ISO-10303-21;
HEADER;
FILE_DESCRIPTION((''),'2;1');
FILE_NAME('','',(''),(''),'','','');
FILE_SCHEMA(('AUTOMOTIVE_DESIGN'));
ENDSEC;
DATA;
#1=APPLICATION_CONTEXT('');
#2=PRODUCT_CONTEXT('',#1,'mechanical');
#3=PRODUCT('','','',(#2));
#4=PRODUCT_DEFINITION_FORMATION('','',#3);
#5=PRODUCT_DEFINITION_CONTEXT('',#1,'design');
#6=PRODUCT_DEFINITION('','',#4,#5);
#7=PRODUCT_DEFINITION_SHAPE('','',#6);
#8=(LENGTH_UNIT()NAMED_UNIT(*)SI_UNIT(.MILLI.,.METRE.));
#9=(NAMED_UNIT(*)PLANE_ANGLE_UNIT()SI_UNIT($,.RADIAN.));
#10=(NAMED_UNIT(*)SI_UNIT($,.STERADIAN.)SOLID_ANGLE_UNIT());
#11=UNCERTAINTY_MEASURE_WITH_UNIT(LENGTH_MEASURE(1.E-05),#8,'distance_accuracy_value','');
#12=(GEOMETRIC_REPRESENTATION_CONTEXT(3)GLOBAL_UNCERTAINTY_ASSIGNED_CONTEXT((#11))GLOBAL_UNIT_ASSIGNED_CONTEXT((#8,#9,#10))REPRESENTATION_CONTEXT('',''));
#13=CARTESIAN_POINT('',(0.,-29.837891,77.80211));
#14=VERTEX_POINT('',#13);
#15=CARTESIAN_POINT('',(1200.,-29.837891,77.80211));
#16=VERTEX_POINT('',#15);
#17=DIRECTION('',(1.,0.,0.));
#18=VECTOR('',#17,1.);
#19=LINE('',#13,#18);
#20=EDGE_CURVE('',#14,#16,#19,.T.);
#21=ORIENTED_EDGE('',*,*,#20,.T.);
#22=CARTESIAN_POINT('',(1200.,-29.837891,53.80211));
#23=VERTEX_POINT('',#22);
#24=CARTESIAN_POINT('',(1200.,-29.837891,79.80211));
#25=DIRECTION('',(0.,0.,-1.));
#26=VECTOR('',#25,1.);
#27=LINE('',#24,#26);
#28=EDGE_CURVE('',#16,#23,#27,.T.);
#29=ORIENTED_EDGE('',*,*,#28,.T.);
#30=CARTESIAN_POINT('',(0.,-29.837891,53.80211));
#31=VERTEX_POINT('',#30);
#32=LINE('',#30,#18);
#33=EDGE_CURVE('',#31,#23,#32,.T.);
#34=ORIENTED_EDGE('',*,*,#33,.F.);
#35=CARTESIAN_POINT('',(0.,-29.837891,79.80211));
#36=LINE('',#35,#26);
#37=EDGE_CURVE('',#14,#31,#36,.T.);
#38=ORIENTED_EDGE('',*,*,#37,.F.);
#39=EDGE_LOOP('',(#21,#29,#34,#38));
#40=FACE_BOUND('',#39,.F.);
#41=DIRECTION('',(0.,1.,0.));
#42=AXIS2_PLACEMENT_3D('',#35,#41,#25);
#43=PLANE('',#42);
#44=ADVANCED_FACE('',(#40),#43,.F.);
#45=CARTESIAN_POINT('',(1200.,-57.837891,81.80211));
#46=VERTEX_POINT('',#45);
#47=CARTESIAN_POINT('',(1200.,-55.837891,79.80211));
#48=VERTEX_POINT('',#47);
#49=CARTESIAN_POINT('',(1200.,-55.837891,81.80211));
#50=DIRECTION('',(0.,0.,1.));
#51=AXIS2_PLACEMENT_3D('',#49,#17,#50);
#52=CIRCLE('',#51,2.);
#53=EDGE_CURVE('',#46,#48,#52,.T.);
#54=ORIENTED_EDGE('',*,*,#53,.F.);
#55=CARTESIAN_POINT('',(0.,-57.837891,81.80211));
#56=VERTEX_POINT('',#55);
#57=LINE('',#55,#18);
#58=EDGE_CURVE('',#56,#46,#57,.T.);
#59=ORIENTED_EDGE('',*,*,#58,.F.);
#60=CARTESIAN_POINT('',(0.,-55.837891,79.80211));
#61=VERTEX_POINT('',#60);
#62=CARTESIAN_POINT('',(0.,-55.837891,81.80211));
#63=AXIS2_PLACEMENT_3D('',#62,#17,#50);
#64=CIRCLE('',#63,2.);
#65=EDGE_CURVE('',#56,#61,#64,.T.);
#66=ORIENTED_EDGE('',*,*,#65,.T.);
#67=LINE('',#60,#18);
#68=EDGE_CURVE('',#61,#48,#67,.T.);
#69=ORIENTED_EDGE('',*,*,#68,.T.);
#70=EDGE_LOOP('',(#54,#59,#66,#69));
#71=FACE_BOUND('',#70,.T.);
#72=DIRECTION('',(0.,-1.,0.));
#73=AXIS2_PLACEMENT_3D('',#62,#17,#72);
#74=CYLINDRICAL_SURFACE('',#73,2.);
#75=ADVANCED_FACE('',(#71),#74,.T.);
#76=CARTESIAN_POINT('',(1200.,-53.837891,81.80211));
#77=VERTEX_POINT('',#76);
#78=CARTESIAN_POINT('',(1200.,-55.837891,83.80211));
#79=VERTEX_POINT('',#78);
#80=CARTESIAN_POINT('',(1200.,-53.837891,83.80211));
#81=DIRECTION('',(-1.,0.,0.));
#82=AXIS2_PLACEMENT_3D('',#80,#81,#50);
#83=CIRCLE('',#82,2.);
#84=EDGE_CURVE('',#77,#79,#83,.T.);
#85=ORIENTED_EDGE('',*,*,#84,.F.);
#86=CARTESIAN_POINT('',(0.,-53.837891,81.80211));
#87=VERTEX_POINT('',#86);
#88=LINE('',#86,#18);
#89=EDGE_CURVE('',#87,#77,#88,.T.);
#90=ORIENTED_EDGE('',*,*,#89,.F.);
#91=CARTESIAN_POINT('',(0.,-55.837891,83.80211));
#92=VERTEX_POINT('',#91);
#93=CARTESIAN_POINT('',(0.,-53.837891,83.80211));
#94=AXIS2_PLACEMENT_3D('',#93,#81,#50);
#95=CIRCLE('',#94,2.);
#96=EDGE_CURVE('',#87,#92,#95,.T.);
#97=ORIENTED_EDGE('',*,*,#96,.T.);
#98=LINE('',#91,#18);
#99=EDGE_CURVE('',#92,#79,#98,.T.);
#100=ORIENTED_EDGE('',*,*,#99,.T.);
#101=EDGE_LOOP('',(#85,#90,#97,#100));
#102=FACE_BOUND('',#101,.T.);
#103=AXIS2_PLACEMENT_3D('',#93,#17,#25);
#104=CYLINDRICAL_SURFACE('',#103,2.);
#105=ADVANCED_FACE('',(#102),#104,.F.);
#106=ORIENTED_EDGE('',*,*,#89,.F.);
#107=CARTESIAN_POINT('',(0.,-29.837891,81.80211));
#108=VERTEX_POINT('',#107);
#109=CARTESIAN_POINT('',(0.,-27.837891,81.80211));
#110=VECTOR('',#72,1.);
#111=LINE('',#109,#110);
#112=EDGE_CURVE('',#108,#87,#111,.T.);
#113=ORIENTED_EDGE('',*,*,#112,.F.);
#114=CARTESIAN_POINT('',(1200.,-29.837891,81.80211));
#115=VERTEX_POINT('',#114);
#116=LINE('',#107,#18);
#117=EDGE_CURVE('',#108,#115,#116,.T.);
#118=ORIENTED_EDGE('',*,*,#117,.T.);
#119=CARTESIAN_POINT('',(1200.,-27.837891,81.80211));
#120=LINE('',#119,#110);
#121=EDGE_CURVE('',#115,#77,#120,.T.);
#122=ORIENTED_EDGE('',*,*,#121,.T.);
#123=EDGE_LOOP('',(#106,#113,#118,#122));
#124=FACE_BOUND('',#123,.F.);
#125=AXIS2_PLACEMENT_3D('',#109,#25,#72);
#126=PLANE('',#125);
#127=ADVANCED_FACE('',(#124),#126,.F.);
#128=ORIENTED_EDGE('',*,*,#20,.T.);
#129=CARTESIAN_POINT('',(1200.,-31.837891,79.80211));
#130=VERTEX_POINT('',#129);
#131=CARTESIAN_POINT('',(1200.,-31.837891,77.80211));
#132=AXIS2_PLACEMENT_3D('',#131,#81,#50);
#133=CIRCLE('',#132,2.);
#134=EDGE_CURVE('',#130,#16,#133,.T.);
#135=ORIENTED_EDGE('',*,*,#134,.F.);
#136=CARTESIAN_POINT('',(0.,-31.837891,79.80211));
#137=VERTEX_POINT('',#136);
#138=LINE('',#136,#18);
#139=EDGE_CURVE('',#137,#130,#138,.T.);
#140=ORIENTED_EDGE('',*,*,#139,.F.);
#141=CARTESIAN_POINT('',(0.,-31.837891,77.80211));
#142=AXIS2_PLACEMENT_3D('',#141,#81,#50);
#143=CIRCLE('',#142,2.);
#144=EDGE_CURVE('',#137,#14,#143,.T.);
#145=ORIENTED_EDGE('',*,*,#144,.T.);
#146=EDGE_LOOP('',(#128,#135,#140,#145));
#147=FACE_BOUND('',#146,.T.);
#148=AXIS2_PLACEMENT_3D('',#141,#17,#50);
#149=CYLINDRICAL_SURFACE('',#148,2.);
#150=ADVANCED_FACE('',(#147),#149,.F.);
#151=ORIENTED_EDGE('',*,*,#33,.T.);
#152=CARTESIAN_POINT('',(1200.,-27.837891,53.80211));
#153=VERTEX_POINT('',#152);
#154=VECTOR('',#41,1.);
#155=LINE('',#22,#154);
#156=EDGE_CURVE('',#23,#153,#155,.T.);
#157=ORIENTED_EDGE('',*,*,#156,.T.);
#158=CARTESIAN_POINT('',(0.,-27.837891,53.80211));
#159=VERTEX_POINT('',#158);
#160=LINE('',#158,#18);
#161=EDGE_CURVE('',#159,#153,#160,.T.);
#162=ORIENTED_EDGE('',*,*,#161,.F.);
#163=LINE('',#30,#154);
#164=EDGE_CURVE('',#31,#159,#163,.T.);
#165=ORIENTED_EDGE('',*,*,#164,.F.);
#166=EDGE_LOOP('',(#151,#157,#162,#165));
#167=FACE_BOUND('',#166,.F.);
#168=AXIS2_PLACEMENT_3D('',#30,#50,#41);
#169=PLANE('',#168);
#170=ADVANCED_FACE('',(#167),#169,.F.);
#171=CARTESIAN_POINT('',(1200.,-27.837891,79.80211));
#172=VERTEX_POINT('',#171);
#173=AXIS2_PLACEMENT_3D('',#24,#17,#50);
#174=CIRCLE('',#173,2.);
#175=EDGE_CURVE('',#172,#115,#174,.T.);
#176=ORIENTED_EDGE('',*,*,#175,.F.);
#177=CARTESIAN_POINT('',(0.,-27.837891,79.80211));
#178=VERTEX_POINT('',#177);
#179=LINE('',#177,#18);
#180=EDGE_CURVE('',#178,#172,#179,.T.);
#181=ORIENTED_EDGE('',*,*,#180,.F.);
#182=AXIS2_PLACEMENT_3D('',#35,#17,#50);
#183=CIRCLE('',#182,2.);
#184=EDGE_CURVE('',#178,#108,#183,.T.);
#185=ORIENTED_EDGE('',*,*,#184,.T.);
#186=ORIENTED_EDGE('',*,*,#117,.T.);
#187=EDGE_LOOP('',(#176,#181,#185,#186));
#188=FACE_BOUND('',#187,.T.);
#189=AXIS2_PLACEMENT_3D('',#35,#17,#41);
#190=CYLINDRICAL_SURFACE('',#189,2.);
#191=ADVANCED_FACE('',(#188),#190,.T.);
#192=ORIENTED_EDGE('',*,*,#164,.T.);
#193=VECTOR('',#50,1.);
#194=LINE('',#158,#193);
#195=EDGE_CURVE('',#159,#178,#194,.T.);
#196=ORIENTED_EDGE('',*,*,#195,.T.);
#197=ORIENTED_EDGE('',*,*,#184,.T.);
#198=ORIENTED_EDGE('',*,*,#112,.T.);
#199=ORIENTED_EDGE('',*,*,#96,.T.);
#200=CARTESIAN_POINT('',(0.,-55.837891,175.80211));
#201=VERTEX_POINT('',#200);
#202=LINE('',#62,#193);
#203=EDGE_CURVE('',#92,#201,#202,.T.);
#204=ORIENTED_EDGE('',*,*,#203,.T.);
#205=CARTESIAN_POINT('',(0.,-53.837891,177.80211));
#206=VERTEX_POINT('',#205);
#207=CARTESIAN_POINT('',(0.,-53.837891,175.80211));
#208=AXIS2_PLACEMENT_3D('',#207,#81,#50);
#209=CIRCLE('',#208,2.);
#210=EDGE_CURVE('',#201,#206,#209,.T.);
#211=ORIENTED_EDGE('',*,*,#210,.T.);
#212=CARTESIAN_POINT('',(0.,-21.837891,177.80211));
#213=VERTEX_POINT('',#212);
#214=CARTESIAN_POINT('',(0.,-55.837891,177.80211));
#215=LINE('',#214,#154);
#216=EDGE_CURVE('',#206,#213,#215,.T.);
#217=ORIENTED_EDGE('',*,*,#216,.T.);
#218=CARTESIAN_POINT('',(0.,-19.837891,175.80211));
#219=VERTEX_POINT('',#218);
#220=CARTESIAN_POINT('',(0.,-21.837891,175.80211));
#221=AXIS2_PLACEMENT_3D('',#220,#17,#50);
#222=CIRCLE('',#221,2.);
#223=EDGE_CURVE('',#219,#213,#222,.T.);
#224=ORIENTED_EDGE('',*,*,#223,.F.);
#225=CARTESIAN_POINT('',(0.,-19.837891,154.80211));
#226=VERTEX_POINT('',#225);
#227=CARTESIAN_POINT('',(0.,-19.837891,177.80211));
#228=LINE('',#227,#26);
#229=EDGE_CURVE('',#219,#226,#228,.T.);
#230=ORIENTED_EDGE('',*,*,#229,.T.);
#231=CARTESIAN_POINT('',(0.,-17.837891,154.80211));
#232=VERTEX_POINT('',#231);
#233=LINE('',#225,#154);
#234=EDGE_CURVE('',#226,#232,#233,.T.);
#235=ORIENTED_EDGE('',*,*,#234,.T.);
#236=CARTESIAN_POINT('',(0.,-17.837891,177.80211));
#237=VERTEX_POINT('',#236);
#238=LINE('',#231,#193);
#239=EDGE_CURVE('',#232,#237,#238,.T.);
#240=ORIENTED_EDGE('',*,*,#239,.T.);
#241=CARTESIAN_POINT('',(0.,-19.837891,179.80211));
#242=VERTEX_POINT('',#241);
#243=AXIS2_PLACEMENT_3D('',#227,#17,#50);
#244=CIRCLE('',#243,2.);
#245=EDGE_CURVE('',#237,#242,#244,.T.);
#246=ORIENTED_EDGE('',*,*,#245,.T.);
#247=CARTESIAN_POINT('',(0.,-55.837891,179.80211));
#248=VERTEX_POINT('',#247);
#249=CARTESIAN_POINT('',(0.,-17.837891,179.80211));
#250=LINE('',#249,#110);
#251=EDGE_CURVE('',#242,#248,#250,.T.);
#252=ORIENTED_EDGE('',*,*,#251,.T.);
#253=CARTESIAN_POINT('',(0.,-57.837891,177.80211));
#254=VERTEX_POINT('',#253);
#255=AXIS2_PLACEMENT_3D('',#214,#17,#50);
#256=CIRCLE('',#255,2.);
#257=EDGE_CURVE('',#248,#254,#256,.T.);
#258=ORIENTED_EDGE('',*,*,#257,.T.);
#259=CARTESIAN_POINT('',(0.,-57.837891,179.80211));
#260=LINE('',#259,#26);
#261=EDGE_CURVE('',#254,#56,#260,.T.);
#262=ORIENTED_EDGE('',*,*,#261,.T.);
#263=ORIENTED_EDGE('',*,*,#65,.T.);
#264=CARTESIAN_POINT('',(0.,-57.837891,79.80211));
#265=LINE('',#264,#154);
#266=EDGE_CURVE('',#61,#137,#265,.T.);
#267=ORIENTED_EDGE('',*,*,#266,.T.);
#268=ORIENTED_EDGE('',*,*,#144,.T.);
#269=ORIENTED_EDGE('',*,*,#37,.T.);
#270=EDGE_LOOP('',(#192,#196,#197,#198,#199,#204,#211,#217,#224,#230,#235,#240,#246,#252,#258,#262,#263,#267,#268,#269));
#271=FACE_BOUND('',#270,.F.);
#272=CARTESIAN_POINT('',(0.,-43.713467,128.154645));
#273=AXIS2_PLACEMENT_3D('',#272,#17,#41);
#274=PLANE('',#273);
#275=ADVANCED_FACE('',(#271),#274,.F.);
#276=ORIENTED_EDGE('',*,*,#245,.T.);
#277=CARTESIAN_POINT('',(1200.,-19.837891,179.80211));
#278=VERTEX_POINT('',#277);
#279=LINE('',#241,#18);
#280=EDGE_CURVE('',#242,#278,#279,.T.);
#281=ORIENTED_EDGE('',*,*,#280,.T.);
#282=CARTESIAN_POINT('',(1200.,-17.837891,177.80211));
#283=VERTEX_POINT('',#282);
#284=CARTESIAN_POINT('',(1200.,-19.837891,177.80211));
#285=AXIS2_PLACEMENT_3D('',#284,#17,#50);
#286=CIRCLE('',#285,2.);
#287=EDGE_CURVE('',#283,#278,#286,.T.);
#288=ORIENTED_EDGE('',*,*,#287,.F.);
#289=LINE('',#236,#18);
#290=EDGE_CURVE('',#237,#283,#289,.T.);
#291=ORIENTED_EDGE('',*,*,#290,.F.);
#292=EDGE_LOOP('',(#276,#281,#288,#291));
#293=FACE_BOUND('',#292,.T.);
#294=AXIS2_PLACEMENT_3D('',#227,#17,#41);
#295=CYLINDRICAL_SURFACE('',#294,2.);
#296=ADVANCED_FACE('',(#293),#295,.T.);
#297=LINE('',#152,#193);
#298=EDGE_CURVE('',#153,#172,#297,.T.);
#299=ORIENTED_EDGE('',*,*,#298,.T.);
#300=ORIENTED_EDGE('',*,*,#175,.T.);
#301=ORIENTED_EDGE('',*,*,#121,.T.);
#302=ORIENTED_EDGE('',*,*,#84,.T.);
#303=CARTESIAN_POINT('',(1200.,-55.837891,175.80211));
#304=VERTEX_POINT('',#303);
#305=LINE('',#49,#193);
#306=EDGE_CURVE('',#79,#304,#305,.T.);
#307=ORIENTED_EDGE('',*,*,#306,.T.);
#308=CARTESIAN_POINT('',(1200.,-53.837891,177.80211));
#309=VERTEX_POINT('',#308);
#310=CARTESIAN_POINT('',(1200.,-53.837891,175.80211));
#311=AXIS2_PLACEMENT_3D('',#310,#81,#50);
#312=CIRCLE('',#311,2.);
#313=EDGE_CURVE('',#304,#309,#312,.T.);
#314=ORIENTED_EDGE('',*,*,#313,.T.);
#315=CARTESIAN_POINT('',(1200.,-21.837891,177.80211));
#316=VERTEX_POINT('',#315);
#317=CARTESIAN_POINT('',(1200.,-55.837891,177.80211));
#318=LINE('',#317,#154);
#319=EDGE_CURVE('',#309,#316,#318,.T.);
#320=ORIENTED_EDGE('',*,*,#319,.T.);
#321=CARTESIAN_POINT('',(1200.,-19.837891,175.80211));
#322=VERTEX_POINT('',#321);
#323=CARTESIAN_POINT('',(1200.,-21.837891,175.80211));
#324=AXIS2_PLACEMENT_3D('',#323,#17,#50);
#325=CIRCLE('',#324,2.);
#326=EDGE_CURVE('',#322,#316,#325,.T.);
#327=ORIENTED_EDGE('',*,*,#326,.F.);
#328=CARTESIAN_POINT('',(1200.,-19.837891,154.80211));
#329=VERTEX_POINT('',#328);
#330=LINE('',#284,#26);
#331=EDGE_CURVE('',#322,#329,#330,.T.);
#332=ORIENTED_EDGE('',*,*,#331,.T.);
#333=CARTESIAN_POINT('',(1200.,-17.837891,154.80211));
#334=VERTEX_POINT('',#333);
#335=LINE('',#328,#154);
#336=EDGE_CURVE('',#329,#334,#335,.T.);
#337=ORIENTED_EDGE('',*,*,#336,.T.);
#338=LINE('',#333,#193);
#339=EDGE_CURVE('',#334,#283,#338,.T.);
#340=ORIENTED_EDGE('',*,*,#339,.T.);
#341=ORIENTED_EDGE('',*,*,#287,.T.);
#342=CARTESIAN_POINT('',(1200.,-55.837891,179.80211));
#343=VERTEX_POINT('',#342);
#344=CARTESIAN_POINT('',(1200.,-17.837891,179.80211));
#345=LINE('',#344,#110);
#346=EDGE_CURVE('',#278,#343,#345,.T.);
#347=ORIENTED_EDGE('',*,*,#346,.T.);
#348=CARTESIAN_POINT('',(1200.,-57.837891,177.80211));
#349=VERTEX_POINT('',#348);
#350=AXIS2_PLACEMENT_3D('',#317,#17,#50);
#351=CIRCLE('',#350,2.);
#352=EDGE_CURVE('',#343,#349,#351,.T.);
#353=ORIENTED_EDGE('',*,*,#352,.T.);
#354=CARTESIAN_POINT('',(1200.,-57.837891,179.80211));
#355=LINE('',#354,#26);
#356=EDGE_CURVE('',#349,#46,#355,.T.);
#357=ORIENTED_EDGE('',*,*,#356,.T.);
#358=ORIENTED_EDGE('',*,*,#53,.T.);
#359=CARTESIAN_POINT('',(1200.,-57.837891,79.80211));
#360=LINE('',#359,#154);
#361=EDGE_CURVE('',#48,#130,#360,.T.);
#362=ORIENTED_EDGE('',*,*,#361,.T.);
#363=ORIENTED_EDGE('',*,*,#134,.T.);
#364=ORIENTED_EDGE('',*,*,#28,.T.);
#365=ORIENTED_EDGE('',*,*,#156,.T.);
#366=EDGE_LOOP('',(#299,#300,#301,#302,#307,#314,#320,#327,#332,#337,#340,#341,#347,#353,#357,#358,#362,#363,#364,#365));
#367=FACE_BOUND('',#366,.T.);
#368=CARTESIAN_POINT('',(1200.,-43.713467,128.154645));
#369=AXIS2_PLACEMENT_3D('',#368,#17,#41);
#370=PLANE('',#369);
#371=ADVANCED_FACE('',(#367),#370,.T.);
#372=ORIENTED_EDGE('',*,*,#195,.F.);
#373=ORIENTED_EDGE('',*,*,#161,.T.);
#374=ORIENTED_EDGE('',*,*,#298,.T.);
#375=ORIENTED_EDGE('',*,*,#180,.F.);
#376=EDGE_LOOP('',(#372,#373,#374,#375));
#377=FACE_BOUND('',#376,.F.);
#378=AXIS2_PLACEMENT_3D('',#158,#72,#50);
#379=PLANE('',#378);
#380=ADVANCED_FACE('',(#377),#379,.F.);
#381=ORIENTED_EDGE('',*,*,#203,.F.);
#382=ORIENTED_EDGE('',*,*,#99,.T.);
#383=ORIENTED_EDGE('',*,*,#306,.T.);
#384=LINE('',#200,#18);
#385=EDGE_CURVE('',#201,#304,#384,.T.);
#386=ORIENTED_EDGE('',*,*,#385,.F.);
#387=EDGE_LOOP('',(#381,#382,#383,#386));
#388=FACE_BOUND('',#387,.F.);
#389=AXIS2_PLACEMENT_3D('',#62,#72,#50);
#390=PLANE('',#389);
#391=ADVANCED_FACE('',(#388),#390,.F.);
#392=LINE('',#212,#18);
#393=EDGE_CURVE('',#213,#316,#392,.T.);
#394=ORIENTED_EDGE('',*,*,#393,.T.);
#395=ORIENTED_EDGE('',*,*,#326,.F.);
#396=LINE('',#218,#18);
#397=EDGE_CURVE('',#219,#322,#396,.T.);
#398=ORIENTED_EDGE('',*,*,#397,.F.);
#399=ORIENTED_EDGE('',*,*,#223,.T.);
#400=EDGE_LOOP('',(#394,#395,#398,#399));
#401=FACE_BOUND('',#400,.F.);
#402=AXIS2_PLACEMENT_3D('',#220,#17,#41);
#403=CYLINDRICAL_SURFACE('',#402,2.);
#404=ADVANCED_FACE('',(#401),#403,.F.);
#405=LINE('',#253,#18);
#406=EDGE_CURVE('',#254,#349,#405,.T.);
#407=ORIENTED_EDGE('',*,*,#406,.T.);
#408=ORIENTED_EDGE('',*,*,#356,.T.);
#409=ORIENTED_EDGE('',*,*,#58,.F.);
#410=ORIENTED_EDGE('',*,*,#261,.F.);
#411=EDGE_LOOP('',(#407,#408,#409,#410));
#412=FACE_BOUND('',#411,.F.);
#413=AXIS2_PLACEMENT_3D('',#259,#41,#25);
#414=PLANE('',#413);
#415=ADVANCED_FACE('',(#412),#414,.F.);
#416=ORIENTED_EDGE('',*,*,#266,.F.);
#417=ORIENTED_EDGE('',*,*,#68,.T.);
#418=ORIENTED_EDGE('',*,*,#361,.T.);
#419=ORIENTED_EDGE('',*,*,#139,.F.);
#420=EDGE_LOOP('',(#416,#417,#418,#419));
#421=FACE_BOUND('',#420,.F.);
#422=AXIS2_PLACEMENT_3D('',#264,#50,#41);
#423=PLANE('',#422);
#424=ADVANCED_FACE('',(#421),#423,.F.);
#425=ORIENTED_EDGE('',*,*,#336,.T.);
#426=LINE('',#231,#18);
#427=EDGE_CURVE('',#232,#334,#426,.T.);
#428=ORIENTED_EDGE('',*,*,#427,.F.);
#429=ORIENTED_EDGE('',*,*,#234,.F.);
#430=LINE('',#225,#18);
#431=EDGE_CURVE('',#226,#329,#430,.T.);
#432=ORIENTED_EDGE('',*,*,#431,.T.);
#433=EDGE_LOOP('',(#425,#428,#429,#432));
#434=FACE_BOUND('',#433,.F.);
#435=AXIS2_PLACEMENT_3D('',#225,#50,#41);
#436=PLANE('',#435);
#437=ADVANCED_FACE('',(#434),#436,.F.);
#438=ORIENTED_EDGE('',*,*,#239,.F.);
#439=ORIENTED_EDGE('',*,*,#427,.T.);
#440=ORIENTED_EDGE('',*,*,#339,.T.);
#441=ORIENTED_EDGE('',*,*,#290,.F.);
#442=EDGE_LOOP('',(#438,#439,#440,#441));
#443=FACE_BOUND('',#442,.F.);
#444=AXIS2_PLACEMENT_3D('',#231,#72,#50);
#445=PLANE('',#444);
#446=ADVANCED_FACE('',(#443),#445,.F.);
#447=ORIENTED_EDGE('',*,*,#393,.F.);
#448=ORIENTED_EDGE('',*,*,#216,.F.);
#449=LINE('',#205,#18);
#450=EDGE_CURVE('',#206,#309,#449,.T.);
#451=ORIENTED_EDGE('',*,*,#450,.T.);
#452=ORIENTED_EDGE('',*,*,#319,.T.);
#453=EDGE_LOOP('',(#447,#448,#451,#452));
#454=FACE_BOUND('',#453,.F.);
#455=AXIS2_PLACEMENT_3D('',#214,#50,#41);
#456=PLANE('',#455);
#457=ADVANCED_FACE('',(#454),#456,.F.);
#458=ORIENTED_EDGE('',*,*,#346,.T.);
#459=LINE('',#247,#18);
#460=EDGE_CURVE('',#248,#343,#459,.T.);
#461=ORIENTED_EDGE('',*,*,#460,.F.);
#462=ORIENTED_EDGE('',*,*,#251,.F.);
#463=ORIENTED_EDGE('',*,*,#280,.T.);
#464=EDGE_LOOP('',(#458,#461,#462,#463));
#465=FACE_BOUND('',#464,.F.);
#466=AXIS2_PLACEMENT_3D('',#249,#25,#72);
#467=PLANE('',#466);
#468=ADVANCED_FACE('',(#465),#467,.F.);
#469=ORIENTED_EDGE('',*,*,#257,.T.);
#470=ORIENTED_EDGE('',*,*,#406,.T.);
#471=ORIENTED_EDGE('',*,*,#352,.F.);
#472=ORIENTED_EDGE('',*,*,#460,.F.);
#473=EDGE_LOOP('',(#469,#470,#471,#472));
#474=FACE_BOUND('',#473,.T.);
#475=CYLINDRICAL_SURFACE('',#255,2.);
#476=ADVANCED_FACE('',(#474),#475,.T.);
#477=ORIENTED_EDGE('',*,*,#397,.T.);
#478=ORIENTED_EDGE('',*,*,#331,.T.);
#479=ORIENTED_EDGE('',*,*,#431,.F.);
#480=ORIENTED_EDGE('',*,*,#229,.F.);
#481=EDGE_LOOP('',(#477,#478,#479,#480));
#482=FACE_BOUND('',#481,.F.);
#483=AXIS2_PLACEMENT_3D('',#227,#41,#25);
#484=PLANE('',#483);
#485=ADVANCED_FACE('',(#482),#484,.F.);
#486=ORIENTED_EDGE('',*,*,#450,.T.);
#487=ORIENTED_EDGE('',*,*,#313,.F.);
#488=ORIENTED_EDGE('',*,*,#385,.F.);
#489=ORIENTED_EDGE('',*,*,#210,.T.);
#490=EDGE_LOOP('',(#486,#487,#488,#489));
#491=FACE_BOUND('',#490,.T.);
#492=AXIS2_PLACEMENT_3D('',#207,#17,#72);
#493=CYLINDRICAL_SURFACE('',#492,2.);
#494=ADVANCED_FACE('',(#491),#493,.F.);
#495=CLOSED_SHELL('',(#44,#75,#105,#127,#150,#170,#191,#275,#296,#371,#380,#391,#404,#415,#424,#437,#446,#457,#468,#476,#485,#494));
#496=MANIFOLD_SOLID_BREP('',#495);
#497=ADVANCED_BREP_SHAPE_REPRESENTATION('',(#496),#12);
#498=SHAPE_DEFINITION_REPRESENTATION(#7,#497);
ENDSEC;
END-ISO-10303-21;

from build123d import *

# Parameters (mm, degrees)
F1_DEPTH = 1200
F2_R     = 2


# Not quite as in the source:
# - a feature names something its author has since deleted; it is built from what else it names


with BuildPart() as f1:
    # F0 (on Right) → F1 (new body)
    with BuildSketch(Plane.YZ):
        Polygon((-19.8378913403, 177.8021101952), (-19.8378913403, 154.8021101952), (-17.8378913403, 154.8021101952), (-17.8378913403, 179.8021101952), (-57.8378913403, 179.8021101952), (-57.8378913403, 79.8021101952), (-29.8378913403, 79.8021101952), (-29.8378913403, 53.8021101952), (-27.8378913403, 53.8021101952), (-27.8378913403, 81.8021101952), (-55.8378913403, 81.8021101952), (-55.8378913403, 177.8021101952), align=None)
    extrude(amount=F1_DEPTH)

    # F2
    f2_edges = [f1.edges().sort_by_distance(p)[0] for p in [
        (600, -57.837891, 179.80211),
        (600, -17.837891, 179.80211),
        (600, -57.837891, 79.80211),
        (600, -27.837891, 81.80211),
        (600, -55.837891, 81.80211),
        (600, -29.837891, 79.80211),
        (600, -19.837891, 177.80211),
        (600, -55.837891, 177.80211),
    ]]
    fillet(f2_edges, radius=F2_R)


solid = f1.part
